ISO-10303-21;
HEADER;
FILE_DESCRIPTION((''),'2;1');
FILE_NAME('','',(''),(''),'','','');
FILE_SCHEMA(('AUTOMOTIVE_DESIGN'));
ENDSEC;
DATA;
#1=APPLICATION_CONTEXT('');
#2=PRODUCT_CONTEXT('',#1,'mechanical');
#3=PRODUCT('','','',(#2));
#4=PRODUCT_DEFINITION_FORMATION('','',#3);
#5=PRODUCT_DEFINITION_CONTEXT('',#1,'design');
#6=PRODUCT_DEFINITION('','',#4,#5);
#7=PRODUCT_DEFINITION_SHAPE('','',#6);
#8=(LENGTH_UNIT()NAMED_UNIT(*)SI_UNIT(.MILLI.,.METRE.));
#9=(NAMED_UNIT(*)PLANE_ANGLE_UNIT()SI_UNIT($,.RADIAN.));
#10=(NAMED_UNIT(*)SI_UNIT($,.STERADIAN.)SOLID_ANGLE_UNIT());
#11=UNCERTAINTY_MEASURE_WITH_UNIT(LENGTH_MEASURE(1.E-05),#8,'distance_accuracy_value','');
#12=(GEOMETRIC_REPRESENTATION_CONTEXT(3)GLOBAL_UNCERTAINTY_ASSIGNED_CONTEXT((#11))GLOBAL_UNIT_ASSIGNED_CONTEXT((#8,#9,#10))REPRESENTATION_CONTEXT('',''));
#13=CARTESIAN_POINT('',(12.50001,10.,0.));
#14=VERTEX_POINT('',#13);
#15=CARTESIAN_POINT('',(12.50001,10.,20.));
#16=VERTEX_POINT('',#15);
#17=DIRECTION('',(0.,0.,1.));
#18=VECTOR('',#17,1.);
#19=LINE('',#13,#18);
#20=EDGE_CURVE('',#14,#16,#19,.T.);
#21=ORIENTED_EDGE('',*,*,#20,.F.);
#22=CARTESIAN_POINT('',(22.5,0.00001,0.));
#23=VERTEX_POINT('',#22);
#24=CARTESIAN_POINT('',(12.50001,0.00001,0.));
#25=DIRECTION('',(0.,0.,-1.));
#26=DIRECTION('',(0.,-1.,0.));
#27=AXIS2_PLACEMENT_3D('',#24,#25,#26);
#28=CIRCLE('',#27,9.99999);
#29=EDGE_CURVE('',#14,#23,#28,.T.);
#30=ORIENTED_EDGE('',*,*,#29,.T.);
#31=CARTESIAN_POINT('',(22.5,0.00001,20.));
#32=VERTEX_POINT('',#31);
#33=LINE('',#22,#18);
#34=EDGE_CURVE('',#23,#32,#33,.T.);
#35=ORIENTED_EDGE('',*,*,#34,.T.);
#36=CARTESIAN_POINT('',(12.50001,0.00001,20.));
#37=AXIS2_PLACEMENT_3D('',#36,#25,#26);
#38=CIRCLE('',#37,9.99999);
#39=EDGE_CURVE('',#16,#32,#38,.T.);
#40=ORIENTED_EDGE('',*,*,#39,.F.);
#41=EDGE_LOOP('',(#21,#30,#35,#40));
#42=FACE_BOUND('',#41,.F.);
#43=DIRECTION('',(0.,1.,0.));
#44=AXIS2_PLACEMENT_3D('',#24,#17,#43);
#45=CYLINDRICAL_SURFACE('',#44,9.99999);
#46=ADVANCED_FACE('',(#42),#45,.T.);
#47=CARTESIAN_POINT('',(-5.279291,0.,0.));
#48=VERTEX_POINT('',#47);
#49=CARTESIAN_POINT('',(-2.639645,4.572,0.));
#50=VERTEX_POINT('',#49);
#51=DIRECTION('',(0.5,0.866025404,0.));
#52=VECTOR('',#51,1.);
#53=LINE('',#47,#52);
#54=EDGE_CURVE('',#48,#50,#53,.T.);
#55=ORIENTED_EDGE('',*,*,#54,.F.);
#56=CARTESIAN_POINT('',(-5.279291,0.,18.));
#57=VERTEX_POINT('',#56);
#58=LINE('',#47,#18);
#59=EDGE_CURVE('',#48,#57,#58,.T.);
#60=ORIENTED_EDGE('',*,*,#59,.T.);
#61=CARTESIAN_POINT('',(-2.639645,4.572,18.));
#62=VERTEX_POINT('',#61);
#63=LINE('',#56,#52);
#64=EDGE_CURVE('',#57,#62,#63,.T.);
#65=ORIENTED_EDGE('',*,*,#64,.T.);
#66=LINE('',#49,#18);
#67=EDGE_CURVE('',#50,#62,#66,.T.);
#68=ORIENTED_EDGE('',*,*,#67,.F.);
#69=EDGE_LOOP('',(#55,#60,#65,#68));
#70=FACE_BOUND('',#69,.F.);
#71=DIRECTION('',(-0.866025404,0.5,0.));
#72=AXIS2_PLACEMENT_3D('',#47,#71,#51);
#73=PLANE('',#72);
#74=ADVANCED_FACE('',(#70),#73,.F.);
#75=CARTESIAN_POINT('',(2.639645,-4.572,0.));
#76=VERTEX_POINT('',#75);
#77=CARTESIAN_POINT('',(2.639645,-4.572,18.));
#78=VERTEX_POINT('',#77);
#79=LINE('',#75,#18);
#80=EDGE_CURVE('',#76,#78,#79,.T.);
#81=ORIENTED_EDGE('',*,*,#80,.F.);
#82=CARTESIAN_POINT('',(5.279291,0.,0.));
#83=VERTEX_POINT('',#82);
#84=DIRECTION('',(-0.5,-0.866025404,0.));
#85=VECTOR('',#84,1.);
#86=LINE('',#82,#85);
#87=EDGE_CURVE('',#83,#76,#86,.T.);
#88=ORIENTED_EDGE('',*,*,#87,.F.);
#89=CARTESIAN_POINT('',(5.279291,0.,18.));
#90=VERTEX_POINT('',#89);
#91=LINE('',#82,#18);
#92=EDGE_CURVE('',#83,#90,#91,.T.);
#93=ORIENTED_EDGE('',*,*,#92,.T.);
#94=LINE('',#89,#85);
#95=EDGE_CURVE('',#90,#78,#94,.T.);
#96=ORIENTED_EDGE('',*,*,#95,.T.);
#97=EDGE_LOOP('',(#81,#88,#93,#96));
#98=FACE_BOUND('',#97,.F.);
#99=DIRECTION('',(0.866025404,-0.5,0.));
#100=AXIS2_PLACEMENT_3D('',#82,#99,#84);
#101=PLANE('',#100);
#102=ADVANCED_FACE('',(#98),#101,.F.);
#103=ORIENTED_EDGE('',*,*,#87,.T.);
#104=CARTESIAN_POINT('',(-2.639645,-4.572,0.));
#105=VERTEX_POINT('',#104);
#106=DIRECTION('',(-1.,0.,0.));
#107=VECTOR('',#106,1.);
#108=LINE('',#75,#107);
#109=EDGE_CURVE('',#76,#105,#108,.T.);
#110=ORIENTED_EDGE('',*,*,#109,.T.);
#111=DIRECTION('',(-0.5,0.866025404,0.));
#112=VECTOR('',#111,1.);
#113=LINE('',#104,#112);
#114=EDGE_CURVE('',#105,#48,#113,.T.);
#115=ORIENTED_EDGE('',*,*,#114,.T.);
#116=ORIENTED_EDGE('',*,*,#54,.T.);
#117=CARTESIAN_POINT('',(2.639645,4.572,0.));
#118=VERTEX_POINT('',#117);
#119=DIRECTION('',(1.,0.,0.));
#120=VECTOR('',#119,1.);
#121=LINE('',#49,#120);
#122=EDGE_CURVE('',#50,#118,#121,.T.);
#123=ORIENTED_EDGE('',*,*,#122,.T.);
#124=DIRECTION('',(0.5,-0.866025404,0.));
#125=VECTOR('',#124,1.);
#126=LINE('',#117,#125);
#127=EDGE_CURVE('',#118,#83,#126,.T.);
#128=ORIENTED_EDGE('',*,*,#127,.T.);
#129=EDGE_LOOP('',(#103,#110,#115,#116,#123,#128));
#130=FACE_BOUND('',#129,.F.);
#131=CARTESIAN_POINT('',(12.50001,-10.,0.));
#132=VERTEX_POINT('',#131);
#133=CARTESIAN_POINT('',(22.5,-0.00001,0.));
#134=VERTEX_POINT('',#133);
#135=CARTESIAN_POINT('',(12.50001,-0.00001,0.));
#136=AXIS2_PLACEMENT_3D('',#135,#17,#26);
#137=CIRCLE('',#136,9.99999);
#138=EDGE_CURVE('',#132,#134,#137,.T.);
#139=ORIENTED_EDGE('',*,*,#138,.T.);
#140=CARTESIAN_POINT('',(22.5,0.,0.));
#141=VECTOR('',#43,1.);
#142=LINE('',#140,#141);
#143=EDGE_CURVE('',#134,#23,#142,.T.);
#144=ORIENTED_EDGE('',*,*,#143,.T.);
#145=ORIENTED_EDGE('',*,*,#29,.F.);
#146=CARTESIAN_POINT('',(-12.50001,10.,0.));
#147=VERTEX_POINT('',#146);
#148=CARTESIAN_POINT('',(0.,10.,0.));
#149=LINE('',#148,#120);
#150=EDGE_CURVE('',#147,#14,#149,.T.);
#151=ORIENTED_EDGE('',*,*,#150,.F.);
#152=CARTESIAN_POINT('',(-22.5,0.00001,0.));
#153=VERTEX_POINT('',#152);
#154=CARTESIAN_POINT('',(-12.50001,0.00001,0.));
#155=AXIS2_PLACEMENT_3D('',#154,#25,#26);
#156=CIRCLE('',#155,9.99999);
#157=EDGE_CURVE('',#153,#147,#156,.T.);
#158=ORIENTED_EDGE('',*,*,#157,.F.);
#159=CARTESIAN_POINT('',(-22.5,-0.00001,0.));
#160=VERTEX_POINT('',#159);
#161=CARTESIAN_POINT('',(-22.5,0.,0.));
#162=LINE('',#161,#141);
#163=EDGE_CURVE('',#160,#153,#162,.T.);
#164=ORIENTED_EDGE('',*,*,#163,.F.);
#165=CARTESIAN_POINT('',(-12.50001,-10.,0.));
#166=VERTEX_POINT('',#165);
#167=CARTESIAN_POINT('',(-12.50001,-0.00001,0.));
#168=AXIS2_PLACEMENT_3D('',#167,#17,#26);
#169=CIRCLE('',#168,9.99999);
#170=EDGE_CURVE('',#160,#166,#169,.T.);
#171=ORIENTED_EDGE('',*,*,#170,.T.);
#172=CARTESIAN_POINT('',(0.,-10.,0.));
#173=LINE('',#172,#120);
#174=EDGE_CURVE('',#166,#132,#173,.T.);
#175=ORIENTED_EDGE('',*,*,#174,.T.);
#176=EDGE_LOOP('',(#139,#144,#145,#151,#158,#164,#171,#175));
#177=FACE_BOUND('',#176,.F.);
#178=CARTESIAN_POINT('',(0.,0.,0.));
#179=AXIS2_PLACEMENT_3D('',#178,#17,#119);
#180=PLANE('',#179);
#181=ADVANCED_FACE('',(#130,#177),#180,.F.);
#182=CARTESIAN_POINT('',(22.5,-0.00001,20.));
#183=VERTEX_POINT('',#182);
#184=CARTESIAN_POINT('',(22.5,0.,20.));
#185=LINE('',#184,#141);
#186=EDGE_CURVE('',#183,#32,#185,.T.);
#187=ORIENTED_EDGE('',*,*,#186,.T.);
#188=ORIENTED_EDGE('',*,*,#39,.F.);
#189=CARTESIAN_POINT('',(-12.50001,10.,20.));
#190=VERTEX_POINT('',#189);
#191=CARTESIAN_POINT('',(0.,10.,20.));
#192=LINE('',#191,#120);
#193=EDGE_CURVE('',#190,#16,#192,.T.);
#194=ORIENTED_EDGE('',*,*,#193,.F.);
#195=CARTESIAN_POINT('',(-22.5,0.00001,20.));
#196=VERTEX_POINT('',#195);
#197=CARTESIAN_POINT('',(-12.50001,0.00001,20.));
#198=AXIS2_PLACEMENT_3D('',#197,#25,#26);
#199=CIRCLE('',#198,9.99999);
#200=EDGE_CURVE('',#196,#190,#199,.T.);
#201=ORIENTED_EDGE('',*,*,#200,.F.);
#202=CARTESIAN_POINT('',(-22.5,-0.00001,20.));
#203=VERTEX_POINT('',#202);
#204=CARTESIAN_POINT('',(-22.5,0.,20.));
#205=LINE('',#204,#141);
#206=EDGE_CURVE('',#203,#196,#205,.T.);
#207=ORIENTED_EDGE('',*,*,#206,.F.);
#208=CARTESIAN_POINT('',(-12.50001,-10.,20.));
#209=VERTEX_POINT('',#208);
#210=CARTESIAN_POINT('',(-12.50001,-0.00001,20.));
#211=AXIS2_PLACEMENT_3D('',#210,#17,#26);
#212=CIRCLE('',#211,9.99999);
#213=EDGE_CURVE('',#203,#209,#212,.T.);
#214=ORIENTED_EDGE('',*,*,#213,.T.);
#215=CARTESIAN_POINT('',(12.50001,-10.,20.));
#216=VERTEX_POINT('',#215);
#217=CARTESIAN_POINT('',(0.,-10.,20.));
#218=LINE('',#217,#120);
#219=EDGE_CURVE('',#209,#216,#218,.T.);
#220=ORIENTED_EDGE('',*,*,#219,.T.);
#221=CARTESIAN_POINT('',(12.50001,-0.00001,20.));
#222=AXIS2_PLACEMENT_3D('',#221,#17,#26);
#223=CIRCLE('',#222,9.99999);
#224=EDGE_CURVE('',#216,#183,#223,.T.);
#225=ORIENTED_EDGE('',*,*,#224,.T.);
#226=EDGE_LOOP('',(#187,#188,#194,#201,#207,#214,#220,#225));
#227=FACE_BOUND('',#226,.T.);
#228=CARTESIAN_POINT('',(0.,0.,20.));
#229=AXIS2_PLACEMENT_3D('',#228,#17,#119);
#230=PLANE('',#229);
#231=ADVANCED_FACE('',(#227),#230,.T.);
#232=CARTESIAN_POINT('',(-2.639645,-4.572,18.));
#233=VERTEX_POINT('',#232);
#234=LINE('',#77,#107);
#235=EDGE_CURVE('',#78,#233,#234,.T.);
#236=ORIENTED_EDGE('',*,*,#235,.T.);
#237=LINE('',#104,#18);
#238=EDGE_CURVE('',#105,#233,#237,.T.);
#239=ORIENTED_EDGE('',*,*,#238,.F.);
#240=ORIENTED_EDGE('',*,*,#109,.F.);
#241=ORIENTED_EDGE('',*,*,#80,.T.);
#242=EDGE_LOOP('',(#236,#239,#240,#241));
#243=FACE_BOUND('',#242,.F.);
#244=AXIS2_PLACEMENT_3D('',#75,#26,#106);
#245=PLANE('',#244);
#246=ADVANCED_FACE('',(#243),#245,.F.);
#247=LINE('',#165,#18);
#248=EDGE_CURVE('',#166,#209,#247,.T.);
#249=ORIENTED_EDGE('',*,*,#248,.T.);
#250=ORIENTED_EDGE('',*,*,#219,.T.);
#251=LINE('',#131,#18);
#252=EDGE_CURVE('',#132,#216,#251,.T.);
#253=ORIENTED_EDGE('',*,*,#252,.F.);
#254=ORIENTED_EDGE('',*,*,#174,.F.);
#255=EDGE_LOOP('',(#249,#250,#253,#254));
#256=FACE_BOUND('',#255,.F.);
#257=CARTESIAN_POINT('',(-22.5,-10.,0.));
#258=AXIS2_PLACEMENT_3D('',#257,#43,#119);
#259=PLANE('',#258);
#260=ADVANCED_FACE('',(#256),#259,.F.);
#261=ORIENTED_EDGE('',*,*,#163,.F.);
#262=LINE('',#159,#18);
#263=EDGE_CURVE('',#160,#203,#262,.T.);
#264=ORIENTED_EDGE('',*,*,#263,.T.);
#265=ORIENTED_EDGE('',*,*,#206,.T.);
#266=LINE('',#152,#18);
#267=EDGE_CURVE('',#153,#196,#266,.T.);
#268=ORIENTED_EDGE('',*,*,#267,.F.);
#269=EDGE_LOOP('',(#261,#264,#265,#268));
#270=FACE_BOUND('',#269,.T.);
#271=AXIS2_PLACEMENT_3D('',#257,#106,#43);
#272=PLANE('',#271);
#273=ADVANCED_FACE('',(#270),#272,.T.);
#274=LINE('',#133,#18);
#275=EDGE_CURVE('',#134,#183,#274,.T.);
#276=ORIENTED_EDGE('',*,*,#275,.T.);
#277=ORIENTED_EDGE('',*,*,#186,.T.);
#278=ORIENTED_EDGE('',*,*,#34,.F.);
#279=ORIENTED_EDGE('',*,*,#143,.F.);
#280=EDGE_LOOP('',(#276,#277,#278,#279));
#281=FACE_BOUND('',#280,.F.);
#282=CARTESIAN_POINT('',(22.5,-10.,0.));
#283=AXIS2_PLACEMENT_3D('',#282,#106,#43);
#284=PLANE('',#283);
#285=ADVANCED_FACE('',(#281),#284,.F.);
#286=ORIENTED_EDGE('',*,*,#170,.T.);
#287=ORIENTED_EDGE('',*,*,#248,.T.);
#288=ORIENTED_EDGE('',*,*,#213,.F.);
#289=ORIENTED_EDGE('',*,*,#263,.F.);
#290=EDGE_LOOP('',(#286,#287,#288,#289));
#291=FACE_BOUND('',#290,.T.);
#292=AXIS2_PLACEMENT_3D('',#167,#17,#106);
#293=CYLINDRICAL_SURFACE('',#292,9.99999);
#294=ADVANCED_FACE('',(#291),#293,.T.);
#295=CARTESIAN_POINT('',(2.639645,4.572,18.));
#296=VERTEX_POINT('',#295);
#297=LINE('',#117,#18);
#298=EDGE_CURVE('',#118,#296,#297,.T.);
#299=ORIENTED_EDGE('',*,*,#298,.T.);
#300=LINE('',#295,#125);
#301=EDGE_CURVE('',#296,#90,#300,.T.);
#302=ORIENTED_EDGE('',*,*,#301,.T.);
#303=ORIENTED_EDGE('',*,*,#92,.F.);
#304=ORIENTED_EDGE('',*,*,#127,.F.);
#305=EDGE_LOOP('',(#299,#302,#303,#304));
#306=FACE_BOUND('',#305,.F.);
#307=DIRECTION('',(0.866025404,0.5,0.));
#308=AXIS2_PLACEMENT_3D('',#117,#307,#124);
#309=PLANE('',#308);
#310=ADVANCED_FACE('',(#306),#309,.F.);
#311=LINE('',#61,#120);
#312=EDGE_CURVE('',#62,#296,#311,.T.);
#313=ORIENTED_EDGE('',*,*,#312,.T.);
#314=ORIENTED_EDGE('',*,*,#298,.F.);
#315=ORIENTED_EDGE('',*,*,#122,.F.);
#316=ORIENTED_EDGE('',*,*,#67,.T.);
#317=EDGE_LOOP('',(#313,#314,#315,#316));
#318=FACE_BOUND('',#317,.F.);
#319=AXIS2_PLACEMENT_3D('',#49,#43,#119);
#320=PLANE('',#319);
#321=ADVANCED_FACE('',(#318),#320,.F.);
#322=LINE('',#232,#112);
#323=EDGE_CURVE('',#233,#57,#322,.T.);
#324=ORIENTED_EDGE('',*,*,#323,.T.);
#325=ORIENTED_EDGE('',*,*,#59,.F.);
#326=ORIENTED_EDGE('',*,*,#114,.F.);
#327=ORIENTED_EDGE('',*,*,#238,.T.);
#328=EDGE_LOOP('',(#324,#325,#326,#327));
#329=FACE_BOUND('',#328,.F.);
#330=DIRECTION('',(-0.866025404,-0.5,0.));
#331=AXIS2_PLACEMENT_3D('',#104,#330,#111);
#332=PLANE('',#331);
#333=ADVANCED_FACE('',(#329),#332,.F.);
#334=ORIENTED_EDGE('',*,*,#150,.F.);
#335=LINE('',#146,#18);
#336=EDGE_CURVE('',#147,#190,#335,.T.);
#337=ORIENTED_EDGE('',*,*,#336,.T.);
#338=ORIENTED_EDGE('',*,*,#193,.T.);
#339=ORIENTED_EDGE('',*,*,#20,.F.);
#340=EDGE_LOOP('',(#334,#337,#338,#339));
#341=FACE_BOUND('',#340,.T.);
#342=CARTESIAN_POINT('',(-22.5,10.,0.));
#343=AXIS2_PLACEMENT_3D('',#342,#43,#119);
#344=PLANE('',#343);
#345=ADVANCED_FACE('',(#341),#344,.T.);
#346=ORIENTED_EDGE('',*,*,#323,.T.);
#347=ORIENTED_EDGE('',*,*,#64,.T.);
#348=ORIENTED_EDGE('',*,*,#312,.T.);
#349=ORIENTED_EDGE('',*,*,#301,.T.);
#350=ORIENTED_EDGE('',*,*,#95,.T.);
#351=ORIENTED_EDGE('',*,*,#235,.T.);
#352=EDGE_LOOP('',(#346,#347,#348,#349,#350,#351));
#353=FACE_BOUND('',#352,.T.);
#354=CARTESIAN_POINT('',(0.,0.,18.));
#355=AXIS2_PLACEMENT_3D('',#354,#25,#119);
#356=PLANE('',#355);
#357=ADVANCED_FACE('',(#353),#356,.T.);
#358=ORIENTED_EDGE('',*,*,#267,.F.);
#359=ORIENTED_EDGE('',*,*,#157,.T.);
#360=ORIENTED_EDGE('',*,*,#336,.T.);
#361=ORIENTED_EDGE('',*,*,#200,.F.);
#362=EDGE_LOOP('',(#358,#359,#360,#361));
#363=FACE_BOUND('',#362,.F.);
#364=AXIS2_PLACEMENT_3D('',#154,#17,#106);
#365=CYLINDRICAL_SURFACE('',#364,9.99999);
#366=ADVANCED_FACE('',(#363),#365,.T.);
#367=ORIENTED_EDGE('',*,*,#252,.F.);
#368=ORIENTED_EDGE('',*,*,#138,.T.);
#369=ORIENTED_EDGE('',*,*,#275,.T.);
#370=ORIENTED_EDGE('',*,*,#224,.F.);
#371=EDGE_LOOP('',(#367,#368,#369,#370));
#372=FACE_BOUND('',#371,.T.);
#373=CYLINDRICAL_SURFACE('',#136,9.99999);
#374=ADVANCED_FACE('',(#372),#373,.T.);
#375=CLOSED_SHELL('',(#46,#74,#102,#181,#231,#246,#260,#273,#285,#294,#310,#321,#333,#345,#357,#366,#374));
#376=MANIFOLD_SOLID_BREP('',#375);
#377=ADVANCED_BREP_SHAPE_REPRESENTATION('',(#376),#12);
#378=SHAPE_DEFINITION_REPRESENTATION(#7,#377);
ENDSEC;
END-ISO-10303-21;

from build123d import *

# Parameters (mm, degrees)
F0_W     = 45
F0_H     = 20
F1_DEPTH = 20
F3_DEPTH = 18
F4_R     = 9.99999


# Not quite as in the source:
# - a fillet or chamfer is up to 0.001 mm smaller than in the source, because OpenCascade refuses the exact size


with BuildPart() as f1:
    # F0 (on Top) → F1 (new body)
    with BuildSketch(Plane.XY):
        Rectangle(F0_W, F0_H)
    extrude(amount=F1_DEPTH)

    # F2 (on face) → F3 (cut)
    with BuildSketch(Plane(origin=(0, 0, 0), x_dir=(1, 0, 0), z_dir=(0, 0, -1))):
        Polygon((2.6396454307, -4.572), (5.2792908615, 0), (2.6396454307, 4.572), (-2.6396454307, 4.572), (-5.2792908615, 0), (-2.6396454307, -4.572), align=None)
    extrude(amount=-F3_DEPTH, mode=Mode.SUBTRACT)

    # F4 (radius 10 in the source; OpenCascade refuses exactly that, so slightly less here)
    f4_edges = [f1.edges().sort_by_distance(p)[0] for p in [
        (22.5, -10, 10),
        (-22.5, -10, 10),
        (22.5, 10, 10),
        (-22.5, 10, 10),
    ]]
    fillet(f4_edges, radius=F4_R)


solid = f1.part
